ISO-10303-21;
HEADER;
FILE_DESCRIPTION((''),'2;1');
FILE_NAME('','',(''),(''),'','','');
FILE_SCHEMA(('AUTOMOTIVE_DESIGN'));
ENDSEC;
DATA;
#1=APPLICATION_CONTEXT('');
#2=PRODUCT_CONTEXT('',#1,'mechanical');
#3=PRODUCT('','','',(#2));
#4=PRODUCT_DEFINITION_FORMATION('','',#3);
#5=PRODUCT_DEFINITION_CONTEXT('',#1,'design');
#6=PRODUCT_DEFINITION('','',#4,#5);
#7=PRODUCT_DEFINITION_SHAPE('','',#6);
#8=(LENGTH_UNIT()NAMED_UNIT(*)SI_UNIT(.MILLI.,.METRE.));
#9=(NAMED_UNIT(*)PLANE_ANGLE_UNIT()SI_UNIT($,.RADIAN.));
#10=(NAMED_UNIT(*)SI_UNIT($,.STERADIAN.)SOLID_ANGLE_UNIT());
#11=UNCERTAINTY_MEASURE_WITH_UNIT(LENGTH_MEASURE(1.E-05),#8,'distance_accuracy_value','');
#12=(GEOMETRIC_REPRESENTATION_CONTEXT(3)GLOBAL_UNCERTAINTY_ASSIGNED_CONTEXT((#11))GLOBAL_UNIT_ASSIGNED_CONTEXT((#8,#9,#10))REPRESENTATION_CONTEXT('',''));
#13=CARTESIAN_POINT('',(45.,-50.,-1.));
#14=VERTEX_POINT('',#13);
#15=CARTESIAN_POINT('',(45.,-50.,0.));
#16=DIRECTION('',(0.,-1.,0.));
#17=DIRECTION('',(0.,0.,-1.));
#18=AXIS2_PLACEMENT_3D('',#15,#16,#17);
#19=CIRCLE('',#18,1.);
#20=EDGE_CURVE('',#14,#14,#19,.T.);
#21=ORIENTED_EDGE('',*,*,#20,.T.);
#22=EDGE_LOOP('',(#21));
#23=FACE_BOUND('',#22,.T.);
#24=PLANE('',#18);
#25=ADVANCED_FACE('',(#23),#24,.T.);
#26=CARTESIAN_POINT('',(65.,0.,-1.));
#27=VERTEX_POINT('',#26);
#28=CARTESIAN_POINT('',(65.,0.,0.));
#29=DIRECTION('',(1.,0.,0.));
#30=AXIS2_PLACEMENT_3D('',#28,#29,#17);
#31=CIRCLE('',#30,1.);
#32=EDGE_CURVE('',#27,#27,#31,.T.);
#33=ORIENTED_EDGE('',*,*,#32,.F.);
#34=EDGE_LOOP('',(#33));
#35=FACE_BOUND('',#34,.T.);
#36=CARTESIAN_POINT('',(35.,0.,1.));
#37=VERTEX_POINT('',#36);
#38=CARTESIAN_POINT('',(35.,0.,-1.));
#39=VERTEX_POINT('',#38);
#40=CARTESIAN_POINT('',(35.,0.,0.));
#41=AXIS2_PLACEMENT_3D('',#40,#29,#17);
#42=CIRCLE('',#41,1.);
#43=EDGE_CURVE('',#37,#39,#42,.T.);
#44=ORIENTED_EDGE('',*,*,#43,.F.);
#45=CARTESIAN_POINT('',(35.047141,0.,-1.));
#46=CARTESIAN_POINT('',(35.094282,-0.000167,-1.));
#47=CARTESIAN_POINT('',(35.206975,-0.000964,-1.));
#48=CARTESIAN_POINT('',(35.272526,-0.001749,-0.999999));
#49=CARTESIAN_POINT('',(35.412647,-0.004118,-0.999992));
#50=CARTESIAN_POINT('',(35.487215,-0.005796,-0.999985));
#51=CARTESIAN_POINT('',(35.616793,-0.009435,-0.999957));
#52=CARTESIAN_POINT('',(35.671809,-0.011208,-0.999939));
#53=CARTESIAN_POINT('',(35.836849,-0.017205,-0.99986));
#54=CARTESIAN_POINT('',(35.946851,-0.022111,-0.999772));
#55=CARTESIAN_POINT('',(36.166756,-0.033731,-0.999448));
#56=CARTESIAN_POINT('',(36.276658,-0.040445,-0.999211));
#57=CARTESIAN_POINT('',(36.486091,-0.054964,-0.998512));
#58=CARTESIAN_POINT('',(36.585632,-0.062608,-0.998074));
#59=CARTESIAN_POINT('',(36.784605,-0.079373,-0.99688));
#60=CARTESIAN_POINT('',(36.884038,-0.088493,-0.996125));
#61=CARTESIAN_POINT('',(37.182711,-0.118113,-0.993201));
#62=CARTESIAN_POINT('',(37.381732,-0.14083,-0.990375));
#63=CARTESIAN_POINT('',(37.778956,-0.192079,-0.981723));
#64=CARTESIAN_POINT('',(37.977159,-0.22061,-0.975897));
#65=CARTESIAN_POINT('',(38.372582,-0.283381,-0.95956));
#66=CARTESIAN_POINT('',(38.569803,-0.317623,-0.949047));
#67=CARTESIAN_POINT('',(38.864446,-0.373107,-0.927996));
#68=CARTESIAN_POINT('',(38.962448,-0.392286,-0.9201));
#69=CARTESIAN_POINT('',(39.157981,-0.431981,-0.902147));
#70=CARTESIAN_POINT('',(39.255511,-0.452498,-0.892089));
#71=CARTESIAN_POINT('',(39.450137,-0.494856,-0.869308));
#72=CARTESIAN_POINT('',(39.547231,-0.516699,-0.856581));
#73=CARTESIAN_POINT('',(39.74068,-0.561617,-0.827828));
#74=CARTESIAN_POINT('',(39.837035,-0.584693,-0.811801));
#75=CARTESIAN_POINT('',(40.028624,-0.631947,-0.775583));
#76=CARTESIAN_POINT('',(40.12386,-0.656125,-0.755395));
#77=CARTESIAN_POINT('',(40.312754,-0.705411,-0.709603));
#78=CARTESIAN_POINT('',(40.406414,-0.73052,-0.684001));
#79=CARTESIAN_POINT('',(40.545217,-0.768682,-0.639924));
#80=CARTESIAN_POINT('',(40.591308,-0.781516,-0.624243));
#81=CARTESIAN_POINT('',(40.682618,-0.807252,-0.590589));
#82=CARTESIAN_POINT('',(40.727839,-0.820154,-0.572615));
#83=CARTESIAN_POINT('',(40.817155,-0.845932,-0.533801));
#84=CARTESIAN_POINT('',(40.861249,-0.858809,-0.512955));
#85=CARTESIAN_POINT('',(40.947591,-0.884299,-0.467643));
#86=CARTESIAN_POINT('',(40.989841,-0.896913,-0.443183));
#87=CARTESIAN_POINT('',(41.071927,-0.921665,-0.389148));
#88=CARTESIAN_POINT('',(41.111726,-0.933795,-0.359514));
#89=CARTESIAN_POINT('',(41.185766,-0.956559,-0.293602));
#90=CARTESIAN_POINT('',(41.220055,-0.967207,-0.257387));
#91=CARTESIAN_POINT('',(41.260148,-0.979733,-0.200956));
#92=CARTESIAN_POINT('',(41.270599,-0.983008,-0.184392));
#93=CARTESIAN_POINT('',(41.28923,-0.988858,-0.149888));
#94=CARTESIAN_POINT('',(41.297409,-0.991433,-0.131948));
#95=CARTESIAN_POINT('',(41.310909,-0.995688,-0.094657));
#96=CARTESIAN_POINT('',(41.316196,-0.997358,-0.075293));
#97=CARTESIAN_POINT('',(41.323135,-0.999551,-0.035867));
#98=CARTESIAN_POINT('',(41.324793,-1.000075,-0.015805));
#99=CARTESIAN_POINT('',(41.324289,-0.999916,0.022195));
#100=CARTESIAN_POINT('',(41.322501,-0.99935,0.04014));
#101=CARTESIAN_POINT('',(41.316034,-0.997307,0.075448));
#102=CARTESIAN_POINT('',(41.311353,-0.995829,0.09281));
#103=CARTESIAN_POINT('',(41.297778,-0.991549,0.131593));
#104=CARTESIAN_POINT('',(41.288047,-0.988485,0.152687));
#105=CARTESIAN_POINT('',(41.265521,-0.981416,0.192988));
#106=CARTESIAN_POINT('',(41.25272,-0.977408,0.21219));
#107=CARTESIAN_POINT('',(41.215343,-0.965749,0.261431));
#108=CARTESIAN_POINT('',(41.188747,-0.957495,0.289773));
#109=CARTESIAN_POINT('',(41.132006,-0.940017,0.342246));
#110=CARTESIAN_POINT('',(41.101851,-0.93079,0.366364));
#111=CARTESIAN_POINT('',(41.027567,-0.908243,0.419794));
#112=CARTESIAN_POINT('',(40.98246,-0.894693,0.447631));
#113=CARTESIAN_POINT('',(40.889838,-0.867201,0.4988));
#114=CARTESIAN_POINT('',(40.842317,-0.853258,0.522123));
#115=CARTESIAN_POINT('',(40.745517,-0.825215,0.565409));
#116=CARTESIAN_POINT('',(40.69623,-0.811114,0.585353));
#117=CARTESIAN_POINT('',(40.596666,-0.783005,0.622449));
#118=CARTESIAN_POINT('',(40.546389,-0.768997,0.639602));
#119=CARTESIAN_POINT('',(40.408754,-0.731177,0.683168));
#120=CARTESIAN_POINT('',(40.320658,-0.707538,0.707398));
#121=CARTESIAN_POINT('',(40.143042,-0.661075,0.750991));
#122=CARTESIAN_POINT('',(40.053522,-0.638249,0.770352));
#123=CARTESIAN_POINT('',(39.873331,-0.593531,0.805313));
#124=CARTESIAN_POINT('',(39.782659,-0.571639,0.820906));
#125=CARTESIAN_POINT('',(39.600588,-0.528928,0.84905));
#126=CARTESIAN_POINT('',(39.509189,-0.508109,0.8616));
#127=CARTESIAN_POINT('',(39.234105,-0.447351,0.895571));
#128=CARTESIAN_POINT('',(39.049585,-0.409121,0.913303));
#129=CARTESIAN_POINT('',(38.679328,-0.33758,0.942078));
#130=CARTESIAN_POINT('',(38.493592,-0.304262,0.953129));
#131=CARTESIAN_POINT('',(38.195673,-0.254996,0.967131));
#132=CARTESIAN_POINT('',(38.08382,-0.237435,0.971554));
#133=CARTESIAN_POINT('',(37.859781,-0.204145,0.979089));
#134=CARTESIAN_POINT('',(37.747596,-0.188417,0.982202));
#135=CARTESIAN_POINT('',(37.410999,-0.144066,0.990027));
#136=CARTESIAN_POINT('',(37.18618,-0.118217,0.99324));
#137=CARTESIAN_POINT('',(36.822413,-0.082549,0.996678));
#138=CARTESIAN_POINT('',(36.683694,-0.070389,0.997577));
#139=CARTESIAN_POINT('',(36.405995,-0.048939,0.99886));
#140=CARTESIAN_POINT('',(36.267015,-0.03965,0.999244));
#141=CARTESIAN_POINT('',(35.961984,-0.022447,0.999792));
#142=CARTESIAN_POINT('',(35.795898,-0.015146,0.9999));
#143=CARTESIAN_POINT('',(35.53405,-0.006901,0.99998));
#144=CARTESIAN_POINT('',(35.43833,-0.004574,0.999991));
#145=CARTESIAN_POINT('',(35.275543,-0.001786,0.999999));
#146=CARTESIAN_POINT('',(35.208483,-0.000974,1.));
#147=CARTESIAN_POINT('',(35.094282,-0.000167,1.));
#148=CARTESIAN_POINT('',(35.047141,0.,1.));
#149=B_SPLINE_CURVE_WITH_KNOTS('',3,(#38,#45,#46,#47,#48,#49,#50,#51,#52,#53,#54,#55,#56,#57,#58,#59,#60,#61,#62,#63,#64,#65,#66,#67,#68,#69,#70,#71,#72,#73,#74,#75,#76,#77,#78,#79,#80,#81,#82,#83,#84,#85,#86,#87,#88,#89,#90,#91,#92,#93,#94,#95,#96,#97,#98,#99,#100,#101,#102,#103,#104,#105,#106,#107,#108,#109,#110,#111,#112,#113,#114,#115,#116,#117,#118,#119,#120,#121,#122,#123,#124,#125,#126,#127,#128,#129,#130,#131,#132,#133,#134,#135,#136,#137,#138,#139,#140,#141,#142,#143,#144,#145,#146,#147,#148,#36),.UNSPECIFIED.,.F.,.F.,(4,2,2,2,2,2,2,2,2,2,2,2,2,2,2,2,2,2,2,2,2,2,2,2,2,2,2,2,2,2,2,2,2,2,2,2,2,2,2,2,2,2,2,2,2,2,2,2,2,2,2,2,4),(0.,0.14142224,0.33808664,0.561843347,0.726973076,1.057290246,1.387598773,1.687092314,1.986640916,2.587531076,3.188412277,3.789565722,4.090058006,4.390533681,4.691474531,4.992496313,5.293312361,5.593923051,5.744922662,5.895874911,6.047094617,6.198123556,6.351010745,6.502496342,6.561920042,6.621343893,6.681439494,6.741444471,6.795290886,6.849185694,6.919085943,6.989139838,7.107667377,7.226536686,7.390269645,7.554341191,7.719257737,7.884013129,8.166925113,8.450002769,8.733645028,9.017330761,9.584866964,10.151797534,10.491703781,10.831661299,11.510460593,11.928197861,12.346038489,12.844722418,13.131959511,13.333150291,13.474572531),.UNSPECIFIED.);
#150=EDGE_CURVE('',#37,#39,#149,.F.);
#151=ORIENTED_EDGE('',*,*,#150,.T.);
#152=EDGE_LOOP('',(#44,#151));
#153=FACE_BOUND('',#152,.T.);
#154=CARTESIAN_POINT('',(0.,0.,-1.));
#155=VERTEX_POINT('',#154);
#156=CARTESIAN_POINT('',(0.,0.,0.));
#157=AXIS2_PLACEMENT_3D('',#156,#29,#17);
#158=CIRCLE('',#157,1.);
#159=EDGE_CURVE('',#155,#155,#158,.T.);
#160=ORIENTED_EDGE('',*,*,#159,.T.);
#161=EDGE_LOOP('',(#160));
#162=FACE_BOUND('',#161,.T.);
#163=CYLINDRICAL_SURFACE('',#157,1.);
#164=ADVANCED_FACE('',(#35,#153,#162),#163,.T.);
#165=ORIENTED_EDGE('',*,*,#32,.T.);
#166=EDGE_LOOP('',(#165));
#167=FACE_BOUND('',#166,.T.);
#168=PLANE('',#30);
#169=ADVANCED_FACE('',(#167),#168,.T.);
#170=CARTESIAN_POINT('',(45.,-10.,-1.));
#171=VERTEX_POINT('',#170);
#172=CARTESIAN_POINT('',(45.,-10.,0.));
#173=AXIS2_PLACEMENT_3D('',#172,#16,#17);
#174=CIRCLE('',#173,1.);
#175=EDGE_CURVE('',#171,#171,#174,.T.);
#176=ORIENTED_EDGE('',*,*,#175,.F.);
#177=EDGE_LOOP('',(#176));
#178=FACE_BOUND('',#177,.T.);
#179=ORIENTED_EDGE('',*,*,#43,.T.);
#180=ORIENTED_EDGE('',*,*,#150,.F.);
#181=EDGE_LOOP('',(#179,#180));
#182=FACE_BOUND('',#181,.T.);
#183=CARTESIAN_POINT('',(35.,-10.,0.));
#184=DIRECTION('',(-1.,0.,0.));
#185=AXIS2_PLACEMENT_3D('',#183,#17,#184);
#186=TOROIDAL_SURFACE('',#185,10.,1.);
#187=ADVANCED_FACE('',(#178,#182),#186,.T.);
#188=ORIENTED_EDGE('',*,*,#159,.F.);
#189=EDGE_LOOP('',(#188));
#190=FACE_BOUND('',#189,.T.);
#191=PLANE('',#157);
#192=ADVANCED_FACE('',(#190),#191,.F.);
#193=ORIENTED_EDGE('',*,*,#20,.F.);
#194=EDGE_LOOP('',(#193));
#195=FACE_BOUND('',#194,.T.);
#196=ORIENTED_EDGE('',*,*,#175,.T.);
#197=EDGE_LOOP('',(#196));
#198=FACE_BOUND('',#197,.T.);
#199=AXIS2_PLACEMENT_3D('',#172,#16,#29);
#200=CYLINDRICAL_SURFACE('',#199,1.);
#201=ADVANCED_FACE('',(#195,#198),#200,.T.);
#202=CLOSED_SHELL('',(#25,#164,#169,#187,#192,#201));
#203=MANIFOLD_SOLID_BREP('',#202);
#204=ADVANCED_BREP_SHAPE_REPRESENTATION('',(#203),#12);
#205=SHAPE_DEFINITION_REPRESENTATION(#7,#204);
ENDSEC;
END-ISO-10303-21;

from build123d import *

# Parameters (mm, degrees)
SKETCH_3_R        = 1
SWEEP_START       = 35
SWEEP_6_OUTLINE_R = 1
SWEEP_6_DEPTH     = 30


# Read off the part's stored shape, not the designer's step: ｽｲｰﾌﾟ6
with BuildPart() as part:
    # ｽｲｰﾌﾟ3: sweep along a path in ｽｹｯﾁ4
    with BuildLine(Plane.XY) as sweep_3_path:
        Line((0, 0), (34.999999999999936, 0))
        ThreePointArc((34.999999999999936, 0), (42.071067811865476, -2.9289321881345254), (45, -10.000000000000066))
        Line((45, -10.000000000000066), (45.000000000000014, -50))
    # ｽｹｯﾁ3 → ｽｲｰﾌﾟ3 (sweep)
    with BuildSketch(Plane(origin=(0, 0, 0), x_dir=(0, 0, -1), z_dir=(1, 0, 0))):
        Circle(SKETCH_3_R)
    sweep(path=sweep_3_path.line)

    # ｽｲｰﾌﾟ6 outline → ｽｲｰﾌﾟ6 (add)
    with BuildSketch(Plane.YZ.offset(SWEEP_START)):
        Circle(SWEEP_6_OUTLINE_R)
    extrude(amount=SWEEP_6_DEPTH)


solid = part.part
